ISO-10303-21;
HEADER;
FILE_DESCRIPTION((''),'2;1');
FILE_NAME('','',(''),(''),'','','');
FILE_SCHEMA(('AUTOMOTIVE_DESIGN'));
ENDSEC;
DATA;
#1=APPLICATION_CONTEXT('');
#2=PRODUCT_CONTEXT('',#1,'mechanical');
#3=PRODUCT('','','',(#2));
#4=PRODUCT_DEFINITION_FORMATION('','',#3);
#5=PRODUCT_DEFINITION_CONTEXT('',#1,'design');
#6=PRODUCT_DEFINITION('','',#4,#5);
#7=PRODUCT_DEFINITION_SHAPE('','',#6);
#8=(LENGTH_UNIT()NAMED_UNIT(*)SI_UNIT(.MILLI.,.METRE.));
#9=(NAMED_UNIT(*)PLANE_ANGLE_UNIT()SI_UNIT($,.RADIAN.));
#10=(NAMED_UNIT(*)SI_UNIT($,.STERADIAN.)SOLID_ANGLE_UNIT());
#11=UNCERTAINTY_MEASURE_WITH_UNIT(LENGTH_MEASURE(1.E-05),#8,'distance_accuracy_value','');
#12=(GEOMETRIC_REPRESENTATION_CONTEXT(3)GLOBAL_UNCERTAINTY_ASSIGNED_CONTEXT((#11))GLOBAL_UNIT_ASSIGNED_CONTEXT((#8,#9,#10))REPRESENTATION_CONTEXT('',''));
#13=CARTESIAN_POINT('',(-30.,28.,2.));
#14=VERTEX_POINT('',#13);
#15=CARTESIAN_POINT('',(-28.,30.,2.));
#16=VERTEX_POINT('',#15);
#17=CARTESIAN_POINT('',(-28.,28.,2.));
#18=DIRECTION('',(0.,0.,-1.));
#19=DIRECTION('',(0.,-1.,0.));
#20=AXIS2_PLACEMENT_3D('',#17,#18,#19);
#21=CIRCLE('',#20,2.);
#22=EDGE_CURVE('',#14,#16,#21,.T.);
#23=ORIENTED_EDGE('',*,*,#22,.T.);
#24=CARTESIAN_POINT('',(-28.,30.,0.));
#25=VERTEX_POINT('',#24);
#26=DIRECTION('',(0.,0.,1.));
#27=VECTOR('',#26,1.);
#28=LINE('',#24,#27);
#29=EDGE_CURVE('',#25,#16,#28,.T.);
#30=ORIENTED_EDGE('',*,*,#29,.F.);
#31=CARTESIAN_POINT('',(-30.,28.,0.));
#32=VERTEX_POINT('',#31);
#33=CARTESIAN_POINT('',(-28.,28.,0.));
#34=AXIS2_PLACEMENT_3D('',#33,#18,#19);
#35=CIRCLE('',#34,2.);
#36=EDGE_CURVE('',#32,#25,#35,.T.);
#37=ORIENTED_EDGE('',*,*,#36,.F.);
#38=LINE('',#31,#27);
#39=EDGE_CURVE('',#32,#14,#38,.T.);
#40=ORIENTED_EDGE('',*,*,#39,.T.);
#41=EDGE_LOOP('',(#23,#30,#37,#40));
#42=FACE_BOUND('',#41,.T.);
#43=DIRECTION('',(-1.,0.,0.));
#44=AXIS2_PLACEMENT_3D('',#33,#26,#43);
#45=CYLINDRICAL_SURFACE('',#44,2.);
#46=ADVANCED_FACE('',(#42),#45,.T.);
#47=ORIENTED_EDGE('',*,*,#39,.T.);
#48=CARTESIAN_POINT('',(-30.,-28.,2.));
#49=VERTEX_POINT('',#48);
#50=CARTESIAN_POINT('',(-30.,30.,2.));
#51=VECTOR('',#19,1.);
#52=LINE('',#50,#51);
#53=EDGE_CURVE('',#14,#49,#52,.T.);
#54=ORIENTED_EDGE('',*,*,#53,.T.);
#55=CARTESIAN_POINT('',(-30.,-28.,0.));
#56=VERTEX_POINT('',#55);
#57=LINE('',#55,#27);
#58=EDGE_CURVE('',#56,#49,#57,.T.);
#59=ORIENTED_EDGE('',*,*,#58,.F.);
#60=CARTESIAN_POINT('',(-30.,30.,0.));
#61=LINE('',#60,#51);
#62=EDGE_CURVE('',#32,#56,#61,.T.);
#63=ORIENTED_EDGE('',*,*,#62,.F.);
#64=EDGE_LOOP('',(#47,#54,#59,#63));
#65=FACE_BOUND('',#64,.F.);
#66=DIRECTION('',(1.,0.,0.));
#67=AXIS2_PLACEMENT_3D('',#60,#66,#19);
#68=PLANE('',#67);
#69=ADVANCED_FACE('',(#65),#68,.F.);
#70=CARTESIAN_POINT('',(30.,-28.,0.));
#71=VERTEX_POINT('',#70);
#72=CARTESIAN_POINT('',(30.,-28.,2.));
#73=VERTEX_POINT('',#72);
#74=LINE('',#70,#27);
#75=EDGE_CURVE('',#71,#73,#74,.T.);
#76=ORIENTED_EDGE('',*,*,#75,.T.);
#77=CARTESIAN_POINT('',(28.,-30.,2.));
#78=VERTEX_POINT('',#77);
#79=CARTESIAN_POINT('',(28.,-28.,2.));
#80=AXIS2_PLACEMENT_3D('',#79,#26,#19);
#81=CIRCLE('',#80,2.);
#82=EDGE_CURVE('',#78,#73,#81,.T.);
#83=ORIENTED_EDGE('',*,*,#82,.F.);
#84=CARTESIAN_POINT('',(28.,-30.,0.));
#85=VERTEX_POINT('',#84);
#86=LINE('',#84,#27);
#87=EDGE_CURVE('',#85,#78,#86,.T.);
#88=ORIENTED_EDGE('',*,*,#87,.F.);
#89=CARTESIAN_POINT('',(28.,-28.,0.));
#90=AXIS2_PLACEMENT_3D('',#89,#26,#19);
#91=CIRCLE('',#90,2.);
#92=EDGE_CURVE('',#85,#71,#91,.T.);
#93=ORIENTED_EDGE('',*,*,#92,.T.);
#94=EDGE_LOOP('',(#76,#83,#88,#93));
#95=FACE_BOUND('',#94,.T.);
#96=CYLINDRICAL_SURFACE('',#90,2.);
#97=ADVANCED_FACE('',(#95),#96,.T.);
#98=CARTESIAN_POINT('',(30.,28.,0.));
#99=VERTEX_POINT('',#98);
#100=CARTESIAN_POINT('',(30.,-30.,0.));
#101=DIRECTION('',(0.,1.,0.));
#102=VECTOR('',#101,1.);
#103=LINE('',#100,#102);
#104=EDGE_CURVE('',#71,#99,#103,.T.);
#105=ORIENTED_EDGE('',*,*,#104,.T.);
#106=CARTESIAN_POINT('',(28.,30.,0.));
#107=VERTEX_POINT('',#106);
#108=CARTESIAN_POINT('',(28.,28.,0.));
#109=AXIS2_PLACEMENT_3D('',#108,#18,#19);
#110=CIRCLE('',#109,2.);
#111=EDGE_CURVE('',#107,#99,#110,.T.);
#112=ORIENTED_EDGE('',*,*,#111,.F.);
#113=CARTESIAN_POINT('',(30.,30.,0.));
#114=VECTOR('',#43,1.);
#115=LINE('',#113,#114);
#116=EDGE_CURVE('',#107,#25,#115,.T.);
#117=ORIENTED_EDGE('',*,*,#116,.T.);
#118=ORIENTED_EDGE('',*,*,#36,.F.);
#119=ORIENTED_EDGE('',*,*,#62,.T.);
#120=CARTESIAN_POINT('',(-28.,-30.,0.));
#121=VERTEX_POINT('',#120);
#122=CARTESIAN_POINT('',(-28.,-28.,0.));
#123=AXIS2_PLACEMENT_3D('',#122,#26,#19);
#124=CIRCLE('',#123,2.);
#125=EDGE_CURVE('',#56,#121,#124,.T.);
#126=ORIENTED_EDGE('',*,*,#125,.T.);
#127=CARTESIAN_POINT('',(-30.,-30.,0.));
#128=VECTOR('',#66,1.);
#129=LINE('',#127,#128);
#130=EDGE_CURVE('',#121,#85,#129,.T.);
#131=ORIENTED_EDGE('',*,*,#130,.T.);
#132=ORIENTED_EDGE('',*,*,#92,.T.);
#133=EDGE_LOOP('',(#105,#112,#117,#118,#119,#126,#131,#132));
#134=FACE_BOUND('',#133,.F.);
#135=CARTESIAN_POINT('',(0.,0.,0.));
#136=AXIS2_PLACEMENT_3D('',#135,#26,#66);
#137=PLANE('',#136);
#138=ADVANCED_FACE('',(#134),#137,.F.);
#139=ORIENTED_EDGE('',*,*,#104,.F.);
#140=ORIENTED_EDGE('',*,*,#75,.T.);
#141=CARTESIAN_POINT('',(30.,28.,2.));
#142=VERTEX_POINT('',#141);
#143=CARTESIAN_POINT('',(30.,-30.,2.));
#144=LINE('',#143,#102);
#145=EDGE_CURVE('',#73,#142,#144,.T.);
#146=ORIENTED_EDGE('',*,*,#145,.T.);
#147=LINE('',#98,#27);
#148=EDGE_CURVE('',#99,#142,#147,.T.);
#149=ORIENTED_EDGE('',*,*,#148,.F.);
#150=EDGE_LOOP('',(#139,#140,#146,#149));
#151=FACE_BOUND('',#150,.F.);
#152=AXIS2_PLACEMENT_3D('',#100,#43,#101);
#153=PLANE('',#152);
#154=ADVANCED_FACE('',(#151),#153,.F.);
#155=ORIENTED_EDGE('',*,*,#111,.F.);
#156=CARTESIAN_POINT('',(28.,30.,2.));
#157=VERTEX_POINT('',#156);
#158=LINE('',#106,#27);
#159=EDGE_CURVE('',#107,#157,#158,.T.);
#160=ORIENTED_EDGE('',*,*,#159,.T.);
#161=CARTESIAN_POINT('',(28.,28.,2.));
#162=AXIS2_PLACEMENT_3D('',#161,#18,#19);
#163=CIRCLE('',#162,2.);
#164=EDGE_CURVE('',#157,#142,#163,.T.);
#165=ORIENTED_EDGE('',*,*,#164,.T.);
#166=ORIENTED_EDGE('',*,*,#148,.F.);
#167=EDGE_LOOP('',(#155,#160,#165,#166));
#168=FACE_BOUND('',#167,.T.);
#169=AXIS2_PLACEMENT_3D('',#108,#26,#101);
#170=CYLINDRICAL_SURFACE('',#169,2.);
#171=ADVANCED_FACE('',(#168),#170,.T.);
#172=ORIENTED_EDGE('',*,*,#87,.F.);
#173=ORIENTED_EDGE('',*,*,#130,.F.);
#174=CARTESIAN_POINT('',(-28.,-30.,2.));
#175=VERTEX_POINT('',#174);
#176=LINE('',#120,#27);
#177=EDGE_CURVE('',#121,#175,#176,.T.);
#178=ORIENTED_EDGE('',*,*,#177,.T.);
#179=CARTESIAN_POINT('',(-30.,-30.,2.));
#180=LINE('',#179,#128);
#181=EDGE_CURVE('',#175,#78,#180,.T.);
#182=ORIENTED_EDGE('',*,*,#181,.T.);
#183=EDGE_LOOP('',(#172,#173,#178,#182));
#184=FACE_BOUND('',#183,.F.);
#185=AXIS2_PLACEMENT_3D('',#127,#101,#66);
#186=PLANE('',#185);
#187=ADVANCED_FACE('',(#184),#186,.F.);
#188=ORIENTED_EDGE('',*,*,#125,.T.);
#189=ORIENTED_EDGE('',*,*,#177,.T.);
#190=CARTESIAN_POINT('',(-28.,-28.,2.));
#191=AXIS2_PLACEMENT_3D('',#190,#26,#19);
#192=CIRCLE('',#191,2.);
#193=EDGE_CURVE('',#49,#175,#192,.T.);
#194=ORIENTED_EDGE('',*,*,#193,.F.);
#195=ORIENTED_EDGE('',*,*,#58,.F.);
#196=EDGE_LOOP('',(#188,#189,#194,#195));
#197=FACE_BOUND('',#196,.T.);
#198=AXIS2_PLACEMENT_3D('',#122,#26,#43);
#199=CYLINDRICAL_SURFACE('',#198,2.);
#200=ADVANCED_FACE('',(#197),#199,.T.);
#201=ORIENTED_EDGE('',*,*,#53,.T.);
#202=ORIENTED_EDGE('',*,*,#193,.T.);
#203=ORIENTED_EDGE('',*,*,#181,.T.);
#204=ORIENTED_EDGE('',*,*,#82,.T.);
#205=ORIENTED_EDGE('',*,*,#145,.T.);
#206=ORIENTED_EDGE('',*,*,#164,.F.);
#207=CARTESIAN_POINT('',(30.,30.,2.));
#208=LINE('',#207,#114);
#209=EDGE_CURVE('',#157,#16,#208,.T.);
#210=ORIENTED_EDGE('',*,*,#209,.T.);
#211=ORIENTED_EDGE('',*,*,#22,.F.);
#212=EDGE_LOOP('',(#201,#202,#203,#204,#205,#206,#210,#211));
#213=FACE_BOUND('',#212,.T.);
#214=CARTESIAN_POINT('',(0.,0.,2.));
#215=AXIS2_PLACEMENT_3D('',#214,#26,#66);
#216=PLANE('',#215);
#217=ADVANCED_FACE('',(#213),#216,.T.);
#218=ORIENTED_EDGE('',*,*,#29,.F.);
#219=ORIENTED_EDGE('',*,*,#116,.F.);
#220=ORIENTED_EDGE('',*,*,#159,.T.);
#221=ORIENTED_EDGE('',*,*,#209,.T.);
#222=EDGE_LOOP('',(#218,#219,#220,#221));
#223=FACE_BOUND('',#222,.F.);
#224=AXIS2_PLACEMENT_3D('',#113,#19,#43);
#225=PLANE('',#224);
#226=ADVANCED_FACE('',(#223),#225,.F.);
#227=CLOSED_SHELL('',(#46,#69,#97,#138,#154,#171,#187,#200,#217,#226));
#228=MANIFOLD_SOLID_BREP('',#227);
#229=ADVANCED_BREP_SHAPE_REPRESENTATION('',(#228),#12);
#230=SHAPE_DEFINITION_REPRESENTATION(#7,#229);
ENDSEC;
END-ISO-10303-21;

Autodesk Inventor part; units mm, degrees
ref_plane "YZ Plane" through (0, 0, 0) normal (1, 0, 0) x (0, 1, 0)
ref_plane "XZ Plane" through (0, 0, 0) normal (0, 1, 0) x (-1, 0, 0)
ref_plane "XY Plane" through (0, 0, 0) normal (0, 0, 1) x (1, 0, 0)
sketch "Sketch1" plane through (0, 0, 0) normal (0, 0, 1) x (1, 0, 0)
  line L0 (-30, -30) -> (30, -30)
  line L1 (30, -30) -> (30, 30)
  line L2 (30, 30) -> (-30, 30)
  line L3 (-30, 30) -> (-30, -30)
  line L4 (-30, -30) -> (30, 30) construction
  line L5 (30, -30) -> (-30, 30) construction
  line L6 (15.25, -15.25) -> (-15.25, -15.25)
  line L7 (-15.25, -15.25) -> (-15.25, 15.25)
  line L8 (-15.25, 15.25) -> (15.25, 15.25)
  line L9 (15.25, 15.25) -> (15.25, -15.25)
  line L10 (15.25, -15.25) -> (-15.25, 15.25) construction
  line L11 (-15.25, -15.25) -> (15.25, 15.25) construction
  point P0 (0, 0)
  dimension "d154" = 60
  dimension "d155" = 60
  dimension "d172" = 30.5
extrude "Plate5" add sketch "Sketch1" along normal blind 2 contours L3 L2 L1 L0 | L6 L7 L8 L9
fillet "Corner Round1" radius 2 4 edges at (30, 30, 1) (-30, 30, 1) (-30, -30, 1) (30, -30, 1)
properties part number "TZS 767 FDS 940 CUP 2" material "Stainless Steel"
